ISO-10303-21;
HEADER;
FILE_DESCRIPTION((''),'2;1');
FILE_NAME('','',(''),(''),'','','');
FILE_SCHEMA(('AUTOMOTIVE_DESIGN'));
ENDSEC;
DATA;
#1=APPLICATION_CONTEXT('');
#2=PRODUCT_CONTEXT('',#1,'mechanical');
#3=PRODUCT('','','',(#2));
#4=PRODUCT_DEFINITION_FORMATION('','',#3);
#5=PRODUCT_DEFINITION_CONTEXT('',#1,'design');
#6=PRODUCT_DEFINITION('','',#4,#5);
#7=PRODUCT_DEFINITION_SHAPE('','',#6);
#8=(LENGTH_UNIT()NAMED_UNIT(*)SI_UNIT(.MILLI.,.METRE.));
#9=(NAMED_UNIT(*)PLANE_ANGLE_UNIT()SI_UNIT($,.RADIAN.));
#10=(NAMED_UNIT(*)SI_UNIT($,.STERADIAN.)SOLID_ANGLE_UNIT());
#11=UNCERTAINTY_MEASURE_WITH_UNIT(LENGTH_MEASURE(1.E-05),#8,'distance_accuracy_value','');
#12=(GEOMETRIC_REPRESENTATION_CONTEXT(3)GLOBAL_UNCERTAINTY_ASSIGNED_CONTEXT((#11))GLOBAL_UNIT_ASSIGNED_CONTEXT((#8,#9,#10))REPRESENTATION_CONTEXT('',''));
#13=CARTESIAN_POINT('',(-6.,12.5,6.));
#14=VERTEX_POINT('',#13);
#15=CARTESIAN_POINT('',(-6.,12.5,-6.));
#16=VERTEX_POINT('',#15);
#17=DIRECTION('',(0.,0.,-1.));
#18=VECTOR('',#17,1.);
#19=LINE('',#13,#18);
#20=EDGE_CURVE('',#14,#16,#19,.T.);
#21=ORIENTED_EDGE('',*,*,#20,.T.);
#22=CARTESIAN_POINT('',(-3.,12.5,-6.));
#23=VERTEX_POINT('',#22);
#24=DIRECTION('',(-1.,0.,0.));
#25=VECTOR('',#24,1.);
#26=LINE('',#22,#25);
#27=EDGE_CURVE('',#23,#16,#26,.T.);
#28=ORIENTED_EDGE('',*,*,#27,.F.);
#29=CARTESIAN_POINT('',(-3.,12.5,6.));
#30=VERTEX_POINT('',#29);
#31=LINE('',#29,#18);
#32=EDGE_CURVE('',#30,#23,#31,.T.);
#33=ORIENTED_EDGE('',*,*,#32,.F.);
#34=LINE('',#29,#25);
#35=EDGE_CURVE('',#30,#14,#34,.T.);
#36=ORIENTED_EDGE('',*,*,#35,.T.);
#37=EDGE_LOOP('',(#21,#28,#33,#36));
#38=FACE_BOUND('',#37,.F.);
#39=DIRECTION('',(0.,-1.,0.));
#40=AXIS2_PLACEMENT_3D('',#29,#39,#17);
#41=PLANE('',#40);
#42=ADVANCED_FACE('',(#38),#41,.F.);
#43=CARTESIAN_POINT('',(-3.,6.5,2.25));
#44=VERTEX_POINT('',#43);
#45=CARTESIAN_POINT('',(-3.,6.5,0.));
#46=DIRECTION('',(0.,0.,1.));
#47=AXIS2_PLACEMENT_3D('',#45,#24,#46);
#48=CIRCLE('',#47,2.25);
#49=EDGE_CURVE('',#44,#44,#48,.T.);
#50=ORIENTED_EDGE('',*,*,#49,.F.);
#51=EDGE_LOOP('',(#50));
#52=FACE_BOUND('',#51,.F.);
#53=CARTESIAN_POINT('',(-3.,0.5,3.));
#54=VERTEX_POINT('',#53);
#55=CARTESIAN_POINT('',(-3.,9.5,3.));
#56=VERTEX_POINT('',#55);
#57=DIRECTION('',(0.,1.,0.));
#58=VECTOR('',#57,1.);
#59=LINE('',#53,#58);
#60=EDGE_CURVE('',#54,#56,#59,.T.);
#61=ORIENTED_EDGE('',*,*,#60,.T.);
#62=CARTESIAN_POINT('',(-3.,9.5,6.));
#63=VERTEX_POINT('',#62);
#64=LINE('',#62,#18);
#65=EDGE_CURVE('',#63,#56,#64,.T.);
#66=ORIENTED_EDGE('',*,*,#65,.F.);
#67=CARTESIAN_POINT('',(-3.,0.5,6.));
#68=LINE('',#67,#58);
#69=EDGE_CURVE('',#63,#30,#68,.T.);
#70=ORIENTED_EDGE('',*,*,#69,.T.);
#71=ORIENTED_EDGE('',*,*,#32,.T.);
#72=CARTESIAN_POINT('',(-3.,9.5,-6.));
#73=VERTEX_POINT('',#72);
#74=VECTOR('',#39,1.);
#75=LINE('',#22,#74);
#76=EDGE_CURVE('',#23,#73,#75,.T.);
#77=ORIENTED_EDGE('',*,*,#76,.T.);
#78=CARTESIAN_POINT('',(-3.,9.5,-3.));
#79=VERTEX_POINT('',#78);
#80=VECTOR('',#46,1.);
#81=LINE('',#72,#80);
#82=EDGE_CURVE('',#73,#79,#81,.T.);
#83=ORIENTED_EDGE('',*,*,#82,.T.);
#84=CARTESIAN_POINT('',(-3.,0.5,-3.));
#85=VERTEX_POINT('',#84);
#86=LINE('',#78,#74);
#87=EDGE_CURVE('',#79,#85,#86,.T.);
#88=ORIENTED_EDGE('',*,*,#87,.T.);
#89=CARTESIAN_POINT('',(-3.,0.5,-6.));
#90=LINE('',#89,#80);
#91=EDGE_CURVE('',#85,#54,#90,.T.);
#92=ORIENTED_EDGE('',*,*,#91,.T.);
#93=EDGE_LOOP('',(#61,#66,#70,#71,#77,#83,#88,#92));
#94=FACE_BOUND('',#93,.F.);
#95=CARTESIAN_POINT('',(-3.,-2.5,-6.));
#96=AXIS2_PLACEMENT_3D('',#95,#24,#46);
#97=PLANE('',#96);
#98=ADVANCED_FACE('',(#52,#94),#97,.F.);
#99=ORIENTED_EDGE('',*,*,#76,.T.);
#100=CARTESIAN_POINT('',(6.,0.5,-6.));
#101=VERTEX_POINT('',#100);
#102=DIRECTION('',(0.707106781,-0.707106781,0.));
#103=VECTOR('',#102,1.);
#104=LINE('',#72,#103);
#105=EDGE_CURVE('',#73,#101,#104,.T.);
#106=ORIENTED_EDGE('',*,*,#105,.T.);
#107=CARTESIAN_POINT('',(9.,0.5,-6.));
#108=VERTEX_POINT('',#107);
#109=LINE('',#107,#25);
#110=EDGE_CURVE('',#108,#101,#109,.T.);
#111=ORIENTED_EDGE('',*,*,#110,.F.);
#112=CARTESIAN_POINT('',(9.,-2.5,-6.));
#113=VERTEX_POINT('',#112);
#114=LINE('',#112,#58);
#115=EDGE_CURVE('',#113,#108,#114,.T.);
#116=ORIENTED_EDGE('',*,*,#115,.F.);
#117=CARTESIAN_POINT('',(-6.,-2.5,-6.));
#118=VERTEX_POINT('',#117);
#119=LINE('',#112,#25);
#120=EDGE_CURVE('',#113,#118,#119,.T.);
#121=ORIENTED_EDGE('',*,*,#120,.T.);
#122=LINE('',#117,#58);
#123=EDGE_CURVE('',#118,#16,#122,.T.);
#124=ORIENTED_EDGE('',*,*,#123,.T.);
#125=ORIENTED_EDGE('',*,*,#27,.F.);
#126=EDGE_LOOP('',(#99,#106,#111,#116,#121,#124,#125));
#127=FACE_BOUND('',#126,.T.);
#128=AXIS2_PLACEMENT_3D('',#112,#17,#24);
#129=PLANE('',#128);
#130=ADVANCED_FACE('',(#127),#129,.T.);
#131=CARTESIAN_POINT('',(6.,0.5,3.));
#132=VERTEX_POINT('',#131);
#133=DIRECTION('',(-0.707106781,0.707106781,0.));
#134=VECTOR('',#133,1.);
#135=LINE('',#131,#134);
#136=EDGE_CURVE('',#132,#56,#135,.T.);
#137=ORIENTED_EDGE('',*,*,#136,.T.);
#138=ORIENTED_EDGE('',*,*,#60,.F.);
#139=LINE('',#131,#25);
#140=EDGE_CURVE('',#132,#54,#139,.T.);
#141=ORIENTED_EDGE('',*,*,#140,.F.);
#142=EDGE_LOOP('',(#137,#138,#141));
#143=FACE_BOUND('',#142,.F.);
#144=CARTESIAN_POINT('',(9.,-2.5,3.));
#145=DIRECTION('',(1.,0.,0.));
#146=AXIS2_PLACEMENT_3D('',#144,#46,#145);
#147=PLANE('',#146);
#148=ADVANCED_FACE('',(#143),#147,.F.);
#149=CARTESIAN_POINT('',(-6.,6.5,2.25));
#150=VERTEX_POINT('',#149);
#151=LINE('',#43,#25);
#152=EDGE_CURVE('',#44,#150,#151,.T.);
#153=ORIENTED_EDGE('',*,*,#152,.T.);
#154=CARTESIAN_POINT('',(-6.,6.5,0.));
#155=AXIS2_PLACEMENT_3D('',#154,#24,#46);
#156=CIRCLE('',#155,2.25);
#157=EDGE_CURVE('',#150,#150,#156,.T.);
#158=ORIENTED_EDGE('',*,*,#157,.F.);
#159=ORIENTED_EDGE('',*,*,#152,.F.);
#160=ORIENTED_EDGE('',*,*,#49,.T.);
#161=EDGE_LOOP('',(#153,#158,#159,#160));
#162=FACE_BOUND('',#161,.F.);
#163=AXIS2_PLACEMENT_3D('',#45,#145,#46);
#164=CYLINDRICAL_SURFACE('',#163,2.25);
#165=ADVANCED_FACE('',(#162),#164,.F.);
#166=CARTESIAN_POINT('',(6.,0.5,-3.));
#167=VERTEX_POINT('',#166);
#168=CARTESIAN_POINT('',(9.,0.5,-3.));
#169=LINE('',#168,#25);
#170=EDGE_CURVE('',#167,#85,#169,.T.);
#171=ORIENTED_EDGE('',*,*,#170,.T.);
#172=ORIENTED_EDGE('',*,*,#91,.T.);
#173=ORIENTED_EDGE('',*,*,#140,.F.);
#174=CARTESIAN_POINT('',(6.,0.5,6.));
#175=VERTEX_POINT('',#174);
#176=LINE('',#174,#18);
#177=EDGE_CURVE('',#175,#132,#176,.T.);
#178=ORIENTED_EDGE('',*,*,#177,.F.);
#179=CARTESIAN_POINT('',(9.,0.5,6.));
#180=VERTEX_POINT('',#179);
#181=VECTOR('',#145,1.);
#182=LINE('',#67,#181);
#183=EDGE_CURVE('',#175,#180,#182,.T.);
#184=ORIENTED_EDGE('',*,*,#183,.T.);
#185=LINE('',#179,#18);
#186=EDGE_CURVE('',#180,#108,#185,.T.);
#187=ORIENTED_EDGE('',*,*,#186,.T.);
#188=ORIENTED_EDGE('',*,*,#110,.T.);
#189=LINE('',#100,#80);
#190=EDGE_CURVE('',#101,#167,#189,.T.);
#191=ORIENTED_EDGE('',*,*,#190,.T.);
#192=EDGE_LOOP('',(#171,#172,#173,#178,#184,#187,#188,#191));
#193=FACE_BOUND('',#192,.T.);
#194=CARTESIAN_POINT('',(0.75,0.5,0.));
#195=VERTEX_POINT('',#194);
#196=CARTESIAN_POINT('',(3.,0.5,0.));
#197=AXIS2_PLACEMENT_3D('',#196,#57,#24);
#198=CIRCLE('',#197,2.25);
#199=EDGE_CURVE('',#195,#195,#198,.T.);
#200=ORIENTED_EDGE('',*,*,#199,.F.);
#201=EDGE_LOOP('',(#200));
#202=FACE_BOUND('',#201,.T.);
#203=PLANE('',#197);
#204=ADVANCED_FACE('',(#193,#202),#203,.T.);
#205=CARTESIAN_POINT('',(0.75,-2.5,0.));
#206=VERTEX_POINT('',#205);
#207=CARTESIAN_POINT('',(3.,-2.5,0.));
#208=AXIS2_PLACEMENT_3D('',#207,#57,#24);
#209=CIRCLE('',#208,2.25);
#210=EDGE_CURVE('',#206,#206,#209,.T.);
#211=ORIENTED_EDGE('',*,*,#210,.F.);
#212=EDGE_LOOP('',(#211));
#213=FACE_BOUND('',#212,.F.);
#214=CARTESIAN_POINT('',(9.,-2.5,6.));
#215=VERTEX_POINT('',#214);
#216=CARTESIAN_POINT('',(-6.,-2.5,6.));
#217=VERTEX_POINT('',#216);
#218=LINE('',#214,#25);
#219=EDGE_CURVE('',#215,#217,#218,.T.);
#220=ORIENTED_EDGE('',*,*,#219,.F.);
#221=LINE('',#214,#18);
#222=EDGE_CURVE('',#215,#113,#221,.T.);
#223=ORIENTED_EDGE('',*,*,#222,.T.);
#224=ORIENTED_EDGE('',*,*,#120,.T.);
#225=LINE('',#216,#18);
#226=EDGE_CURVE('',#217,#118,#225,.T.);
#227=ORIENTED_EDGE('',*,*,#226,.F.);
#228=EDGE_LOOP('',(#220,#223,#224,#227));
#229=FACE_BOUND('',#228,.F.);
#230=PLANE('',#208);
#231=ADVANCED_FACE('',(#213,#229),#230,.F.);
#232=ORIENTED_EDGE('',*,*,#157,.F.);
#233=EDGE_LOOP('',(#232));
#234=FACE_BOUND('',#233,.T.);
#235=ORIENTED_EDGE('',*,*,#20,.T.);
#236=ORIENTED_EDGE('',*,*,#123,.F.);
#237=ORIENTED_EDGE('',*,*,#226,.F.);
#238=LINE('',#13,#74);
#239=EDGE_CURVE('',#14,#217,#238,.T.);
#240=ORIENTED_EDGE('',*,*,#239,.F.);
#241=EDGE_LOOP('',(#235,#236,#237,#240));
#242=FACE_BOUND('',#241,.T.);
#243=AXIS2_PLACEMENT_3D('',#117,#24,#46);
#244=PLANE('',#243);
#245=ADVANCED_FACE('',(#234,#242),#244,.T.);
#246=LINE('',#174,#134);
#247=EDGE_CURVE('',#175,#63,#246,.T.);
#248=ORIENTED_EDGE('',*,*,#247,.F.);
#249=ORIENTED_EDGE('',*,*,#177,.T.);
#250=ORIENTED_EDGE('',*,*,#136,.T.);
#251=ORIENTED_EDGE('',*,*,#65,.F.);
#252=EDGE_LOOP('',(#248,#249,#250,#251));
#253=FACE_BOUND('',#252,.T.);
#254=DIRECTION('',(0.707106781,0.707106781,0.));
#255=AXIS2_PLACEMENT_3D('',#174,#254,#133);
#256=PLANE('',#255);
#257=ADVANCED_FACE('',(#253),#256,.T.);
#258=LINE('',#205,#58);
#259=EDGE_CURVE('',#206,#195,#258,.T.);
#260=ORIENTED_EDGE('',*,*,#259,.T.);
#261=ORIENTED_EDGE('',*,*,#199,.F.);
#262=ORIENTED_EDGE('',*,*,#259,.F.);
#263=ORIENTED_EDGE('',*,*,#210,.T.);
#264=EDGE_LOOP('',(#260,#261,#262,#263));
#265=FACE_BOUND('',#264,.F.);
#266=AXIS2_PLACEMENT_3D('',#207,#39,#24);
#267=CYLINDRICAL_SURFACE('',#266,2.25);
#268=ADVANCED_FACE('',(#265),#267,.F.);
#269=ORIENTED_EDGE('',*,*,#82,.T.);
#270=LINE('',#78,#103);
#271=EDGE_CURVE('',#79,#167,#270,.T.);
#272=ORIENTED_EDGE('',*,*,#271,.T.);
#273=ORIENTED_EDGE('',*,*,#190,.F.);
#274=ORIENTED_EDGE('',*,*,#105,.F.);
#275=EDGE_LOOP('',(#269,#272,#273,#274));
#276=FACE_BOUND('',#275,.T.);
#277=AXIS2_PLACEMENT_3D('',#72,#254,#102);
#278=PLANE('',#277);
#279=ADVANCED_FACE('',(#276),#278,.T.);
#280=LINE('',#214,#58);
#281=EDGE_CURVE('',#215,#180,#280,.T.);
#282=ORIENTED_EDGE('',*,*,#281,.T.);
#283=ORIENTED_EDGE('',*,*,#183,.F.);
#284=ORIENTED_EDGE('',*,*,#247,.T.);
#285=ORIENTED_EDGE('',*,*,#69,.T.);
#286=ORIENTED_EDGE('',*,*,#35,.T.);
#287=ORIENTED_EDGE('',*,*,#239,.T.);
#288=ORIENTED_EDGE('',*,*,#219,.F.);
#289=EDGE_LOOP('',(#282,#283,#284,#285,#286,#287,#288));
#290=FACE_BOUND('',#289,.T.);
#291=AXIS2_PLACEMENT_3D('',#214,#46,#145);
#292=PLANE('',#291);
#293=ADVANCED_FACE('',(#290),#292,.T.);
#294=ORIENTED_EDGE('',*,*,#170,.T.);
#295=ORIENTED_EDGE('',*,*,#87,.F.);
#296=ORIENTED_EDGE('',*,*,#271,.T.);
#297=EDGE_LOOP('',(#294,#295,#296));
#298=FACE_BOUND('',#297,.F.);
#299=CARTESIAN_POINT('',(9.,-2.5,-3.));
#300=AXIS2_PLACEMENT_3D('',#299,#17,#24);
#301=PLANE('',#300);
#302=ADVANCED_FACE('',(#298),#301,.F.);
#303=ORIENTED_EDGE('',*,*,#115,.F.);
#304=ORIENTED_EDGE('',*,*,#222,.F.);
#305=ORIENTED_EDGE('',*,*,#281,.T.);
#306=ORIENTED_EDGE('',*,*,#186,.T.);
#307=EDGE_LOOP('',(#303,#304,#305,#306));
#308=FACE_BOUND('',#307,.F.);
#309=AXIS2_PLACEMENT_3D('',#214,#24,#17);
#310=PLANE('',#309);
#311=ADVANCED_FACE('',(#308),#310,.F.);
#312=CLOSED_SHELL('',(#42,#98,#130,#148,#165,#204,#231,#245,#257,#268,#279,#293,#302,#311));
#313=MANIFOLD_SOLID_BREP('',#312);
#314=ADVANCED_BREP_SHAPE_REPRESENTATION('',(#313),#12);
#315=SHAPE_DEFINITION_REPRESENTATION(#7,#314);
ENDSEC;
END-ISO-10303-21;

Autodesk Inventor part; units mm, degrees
ref_plane "YZ Plane" through (0, 0, 0) normal (1, 0, 0) x (0, 1, 0)
ref_plane "XZ Plane" through (0, 0, 0) normal (0, 1, 0) x (-1, 0, 0)
ref_plane "XY Plane" through (0, 0, 0) normal (0, 0, 1) x (1, 0, 0)
sketch "Boceto1" plane through (0, 0, 0) normal (0, 1, 0) x (-1, 0, 0)
  circle A0 centre (0, 0) radius 1.5
  line L0 (4, 4) -> (-4, 4)
  line L1 (-4, 4) -> (-4, -4)
  line L2 (-4, -4) -> (4, -4)
  line L3 (4, -4) -> (4, 4)
  dimension "d0" = 3
extrude "Extrusión1" add sketch "Boceto1" along normal blind 2
sketch "Boceto2" plane through (-4, 0, -4) normal (-1, 0, 0) x (0, 0, 1)
  circle A0 centre (4, 6) radius 1.5
  line L0 (8, 2) -> (8, 10)
  line L1 (8, 10) -> (0, 10)
  line L2 (0, 10) -> (0, 2)
  line L3 (8, 0) -> (0, 0) projected
  line L4 (0, 0) -> (8, 0)
  line L5 (8, 0) -> (8, 2)
  line L6 (0, 2) -> (0, 0)
  line L7 (0, 0) -> (8, 0)
  line L8 (8, 0) -> (8, 10)
  line L9 (8, 10) -> (0, 10)
  line L10 (0, 10) -> (0, 0)
  point P0 (4, 0)
extrude "Extrusión2" add sketch "Boceto2" along normal blind 2
sketch "Boceto3" plane through (4, 0, 4) normal (0, 0, 1) x (1, 0, 0)
  line L0 (-8, 2) -> (-8, 10) projected
  line L1 (-8, 10) -> (-8, 8)
  line L2 (0, 2) -> (-2, 2)
  line L3 (-2, 2) -> (-8, 8)
  line L4 (-2, 2) -> (-8, 2)
  line L5 (-8, 8) -> (-8, 2)
  point P0 (-5.5, 2)
  point P1 (-8, 4.5)
  dimension "d26" = 2
  dimension "d27" = 2
extrude "Extrusión8" add sketch "Boceto3" against normal blind 2
sketch "Boceto9" plane through (4, 0, -4) normal (0, 0, -1) x (-1, 0, 0)
  line L0 (0, 2) -> (8, 2) projected
  line L1 (8, 8) -> (2, 2) projected
  line L2 (2, 2) -> (8, 8)
  line L3 (8, 8) -> (8, 2)
  line L4 (8, 2) -> (2, 2)
  point P0 (4, 0)
extrude "Extrusión9" add sketch "Boceto9" against normal blind 2
scale "Escala1" factors (1.5, 1.5, 1.5) then translate (3, -2.5, 0) bodies 1
properties part number "Base auxiliar - esquadra"
